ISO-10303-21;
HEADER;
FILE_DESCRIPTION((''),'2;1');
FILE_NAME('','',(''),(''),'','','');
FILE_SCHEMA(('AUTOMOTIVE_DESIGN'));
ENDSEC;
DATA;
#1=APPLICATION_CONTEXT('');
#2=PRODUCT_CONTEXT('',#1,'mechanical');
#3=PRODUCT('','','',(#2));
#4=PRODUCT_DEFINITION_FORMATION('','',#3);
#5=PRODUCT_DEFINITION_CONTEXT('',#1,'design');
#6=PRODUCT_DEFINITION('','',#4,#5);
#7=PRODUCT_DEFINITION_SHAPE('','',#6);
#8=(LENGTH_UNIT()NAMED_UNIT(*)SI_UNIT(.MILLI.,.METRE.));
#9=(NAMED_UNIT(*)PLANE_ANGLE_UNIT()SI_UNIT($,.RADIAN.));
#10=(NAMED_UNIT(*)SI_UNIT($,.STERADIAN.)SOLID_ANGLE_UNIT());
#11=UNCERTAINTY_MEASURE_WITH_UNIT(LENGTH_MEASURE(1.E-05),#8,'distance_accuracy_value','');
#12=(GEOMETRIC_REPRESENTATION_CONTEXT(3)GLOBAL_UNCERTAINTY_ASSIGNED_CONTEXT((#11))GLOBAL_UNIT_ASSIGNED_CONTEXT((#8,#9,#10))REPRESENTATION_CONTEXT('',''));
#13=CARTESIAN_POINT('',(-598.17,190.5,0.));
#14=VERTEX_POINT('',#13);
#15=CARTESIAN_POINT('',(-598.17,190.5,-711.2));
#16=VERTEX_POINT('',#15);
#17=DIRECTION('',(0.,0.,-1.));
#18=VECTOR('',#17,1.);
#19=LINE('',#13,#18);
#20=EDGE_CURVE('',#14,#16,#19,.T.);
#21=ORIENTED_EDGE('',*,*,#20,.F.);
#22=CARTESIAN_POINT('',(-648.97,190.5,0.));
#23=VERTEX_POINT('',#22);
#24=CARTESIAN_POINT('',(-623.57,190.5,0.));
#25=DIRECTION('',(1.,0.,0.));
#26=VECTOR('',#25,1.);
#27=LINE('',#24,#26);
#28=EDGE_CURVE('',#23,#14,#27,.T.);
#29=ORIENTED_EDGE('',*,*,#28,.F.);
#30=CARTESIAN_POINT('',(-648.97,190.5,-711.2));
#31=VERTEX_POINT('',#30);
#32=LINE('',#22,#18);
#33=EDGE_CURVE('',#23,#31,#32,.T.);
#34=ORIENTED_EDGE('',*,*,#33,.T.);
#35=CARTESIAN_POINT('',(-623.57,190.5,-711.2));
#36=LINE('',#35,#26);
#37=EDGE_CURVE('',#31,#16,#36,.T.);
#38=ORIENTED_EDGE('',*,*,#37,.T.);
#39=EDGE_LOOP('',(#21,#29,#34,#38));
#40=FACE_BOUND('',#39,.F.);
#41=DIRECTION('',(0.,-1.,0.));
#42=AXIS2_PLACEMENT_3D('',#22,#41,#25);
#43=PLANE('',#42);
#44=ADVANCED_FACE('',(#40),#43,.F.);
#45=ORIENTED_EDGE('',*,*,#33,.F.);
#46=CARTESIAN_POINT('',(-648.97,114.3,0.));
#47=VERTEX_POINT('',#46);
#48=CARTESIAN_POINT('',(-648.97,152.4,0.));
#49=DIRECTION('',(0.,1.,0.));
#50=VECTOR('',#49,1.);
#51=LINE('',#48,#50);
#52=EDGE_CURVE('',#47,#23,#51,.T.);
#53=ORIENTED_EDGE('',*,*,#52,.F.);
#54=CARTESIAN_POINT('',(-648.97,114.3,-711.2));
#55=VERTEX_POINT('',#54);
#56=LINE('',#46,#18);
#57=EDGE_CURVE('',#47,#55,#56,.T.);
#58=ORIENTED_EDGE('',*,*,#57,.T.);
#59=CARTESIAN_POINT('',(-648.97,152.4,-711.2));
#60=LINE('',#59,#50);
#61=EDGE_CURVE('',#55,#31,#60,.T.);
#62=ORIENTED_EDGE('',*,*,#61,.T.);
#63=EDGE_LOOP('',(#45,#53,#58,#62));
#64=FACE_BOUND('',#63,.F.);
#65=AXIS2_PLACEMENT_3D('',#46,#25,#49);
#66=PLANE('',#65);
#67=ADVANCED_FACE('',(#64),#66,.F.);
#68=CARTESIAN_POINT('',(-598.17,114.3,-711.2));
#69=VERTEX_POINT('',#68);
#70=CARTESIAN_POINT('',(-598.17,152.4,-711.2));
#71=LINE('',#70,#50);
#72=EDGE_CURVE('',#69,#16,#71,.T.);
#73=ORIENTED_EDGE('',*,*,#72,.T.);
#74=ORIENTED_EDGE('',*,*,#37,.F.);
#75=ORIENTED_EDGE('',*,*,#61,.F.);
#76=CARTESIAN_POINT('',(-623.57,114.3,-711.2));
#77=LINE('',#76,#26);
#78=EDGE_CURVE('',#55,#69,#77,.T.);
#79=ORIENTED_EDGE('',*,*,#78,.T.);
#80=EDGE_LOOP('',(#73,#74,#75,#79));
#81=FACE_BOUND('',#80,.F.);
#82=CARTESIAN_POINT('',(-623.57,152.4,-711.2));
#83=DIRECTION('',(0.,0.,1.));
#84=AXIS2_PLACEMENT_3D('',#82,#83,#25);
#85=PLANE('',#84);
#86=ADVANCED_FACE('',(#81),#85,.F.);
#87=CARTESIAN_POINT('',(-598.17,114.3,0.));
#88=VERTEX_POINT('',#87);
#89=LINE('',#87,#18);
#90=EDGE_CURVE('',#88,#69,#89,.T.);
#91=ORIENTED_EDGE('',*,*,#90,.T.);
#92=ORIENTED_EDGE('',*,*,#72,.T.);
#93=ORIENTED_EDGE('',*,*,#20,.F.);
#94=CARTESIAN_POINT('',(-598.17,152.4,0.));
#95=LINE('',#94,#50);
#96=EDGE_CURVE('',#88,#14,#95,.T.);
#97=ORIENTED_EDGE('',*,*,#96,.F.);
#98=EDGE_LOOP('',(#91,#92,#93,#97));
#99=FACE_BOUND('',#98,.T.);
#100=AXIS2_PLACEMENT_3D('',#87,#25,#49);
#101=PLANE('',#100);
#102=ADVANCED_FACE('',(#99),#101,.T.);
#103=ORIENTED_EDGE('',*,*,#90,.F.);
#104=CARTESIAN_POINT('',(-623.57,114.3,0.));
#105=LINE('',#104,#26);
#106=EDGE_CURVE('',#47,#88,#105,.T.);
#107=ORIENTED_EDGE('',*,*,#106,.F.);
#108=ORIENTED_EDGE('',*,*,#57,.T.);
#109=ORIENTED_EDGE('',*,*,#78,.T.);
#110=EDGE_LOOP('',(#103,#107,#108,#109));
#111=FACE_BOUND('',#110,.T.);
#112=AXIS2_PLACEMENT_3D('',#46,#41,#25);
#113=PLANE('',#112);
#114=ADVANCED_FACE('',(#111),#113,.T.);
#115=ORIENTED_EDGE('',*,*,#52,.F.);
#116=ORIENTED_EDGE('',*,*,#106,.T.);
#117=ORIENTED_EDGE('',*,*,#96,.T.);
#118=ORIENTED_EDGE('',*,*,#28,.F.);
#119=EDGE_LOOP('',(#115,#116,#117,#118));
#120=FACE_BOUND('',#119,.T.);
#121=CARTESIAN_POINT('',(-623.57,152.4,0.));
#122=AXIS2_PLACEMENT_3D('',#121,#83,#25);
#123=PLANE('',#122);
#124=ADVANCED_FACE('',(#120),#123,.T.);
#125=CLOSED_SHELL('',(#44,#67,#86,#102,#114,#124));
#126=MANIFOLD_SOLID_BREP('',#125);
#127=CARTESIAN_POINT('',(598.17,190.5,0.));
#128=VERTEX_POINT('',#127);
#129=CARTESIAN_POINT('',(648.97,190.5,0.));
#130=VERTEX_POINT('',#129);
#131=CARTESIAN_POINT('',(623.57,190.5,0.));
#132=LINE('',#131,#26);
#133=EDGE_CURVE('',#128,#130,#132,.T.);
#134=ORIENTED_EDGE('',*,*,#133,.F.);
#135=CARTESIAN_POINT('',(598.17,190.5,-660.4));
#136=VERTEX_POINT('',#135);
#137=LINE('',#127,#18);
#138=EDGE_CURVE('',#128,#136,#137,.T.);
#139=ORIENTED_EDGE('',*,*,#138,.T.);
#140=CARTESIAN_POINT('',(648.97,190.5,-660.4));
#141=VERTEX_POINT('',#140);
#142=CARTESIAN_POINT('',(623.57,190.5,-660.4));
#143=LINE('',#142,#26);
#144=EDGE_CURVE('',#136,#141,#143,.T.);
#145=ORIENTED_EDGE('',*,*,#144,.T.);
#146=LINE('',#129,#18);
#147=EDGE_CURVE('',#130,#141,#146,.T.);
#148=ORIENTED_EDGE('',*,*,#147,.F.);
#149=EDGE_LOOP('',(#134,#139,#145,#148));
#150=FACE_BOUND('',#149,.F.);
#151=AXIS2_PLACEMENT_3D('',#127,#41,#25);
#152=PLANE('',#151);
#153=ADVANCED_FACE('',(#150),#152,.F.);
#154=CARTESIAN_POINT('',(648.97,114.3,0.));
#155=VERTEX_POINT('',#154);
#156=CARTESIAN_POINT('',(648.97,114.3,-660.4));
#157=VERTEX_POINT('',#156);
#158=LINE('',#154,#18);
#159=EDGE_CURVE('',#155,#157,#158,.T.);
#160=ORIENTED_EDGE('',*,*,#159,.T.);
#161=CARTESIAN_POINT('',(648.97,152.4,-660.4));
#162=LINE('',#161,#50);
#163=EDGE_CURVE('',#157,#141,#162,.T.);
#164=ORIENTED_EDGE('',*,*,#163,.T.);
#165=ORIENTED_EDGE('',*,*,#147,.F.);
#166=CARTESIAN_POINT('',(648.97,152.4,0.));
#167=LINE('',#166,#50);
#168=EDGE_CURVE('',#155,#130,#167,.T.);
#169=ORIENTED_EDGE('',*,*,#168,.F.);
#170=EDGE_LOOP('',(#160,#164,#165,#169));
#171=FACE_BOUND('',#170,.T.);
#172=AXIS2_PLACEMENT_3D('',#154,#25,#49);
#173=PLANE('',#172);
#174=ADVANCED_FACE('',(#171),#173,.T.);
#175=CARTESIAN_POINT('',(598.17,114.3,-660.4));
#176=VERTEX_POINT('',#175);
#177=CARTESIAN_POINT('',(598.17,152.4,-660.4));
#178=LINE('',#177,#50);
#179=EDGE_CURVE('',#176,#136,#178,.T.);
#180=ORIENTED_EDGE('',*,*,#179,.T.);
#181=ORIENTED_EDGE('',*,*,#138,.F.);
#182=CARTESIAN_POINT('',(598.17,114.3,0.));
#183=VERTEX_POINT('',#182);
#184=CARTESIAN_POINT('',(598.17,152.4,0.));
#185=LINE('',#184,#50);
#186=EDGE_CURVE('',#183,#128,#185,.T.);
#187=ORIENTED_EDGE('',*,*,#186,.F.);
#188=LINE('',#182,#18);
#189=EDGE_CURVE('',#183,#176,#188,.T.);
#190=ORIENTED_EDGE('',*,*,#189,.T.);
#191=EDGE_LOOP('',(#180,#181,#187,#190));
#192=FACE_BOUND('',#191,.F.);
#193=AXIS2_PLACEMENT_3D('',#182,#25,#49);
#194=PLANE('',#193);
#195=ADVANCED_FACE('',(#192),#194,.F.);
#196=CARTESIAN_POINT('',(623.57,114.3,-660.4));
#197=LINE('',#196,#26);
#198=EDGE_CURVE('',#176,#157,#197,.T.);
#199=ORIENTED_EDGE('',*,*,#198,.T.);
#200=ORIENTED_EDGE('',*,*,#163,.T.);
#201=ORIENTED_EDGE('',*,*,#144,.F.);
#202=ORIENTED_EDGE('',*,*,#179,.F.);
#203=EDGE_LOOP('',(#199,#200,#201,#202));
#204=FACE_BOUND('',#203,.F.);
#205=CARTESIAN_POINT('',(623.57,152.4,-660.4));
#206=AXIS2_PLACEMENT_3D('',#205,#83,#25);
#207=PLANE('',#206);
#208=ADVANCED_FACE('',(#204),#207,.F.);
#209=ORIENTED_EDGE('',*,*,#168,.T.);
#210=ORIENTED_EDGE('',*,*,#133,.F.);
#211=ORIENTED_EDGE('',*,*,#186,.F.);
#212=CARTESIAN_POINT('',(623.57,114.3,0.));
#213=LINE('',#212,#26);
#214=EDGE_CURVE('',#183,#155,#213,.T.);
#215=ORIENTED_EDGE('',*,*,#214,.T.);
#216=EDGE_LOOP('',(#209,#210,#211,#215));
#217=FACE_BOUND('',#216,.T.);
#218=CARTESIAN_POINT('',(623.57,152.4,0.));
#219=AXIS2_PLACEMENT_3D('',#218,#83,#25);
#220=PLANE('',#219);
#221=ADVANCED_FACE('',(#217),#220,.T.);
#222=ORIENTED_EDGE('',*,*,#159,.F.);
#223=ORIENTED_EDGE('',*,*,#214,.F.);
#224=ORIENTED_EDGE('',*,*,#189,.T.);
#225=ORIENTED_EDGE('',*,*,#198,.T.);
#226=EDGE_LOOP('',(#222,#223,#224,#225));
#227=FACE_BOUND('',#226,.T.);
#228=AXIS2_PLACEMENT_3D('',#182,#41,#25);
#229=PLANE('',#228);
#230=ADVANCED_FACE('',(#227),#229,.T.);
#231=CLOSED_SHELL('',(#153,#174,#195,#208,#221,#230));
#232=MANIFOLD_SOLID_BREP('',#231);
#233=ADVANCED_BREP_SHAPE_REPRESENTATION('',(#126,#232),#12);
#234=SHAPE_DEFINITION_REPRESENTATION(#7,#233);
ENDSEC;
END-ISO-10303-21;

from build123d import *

# Parameters (mm, degrees)
F0_W     = 50.8
F0_H     = 76.2
F5_DEPTH = 711.2
F6_DEPTH = 660.4


# Not quite as in the source:
# - a feature of the source that left no trace in its solid (it failed there, or was rolled back) is left out


with BuildPart() as f5:
    # F0 (on Top) → F5 (new body)
    with BuildSketch(Plane.XY):
        with Locations((-623.57, 152.4)):
            Rectangle(F0_W, F0_H)
    extrude(amount=-F5_DEPTH)


with BuildPart() as f6:
    # F0 (on Top) → F6 (new body)
    with BuildSketch(Plane.XY):
        with Locations((623.57, 152.4)):
            Rectangle(F0_W, F0_H)
    extrude(amount=-F6_DEPTH)


solid = Compound([f5.part, f6.part])
